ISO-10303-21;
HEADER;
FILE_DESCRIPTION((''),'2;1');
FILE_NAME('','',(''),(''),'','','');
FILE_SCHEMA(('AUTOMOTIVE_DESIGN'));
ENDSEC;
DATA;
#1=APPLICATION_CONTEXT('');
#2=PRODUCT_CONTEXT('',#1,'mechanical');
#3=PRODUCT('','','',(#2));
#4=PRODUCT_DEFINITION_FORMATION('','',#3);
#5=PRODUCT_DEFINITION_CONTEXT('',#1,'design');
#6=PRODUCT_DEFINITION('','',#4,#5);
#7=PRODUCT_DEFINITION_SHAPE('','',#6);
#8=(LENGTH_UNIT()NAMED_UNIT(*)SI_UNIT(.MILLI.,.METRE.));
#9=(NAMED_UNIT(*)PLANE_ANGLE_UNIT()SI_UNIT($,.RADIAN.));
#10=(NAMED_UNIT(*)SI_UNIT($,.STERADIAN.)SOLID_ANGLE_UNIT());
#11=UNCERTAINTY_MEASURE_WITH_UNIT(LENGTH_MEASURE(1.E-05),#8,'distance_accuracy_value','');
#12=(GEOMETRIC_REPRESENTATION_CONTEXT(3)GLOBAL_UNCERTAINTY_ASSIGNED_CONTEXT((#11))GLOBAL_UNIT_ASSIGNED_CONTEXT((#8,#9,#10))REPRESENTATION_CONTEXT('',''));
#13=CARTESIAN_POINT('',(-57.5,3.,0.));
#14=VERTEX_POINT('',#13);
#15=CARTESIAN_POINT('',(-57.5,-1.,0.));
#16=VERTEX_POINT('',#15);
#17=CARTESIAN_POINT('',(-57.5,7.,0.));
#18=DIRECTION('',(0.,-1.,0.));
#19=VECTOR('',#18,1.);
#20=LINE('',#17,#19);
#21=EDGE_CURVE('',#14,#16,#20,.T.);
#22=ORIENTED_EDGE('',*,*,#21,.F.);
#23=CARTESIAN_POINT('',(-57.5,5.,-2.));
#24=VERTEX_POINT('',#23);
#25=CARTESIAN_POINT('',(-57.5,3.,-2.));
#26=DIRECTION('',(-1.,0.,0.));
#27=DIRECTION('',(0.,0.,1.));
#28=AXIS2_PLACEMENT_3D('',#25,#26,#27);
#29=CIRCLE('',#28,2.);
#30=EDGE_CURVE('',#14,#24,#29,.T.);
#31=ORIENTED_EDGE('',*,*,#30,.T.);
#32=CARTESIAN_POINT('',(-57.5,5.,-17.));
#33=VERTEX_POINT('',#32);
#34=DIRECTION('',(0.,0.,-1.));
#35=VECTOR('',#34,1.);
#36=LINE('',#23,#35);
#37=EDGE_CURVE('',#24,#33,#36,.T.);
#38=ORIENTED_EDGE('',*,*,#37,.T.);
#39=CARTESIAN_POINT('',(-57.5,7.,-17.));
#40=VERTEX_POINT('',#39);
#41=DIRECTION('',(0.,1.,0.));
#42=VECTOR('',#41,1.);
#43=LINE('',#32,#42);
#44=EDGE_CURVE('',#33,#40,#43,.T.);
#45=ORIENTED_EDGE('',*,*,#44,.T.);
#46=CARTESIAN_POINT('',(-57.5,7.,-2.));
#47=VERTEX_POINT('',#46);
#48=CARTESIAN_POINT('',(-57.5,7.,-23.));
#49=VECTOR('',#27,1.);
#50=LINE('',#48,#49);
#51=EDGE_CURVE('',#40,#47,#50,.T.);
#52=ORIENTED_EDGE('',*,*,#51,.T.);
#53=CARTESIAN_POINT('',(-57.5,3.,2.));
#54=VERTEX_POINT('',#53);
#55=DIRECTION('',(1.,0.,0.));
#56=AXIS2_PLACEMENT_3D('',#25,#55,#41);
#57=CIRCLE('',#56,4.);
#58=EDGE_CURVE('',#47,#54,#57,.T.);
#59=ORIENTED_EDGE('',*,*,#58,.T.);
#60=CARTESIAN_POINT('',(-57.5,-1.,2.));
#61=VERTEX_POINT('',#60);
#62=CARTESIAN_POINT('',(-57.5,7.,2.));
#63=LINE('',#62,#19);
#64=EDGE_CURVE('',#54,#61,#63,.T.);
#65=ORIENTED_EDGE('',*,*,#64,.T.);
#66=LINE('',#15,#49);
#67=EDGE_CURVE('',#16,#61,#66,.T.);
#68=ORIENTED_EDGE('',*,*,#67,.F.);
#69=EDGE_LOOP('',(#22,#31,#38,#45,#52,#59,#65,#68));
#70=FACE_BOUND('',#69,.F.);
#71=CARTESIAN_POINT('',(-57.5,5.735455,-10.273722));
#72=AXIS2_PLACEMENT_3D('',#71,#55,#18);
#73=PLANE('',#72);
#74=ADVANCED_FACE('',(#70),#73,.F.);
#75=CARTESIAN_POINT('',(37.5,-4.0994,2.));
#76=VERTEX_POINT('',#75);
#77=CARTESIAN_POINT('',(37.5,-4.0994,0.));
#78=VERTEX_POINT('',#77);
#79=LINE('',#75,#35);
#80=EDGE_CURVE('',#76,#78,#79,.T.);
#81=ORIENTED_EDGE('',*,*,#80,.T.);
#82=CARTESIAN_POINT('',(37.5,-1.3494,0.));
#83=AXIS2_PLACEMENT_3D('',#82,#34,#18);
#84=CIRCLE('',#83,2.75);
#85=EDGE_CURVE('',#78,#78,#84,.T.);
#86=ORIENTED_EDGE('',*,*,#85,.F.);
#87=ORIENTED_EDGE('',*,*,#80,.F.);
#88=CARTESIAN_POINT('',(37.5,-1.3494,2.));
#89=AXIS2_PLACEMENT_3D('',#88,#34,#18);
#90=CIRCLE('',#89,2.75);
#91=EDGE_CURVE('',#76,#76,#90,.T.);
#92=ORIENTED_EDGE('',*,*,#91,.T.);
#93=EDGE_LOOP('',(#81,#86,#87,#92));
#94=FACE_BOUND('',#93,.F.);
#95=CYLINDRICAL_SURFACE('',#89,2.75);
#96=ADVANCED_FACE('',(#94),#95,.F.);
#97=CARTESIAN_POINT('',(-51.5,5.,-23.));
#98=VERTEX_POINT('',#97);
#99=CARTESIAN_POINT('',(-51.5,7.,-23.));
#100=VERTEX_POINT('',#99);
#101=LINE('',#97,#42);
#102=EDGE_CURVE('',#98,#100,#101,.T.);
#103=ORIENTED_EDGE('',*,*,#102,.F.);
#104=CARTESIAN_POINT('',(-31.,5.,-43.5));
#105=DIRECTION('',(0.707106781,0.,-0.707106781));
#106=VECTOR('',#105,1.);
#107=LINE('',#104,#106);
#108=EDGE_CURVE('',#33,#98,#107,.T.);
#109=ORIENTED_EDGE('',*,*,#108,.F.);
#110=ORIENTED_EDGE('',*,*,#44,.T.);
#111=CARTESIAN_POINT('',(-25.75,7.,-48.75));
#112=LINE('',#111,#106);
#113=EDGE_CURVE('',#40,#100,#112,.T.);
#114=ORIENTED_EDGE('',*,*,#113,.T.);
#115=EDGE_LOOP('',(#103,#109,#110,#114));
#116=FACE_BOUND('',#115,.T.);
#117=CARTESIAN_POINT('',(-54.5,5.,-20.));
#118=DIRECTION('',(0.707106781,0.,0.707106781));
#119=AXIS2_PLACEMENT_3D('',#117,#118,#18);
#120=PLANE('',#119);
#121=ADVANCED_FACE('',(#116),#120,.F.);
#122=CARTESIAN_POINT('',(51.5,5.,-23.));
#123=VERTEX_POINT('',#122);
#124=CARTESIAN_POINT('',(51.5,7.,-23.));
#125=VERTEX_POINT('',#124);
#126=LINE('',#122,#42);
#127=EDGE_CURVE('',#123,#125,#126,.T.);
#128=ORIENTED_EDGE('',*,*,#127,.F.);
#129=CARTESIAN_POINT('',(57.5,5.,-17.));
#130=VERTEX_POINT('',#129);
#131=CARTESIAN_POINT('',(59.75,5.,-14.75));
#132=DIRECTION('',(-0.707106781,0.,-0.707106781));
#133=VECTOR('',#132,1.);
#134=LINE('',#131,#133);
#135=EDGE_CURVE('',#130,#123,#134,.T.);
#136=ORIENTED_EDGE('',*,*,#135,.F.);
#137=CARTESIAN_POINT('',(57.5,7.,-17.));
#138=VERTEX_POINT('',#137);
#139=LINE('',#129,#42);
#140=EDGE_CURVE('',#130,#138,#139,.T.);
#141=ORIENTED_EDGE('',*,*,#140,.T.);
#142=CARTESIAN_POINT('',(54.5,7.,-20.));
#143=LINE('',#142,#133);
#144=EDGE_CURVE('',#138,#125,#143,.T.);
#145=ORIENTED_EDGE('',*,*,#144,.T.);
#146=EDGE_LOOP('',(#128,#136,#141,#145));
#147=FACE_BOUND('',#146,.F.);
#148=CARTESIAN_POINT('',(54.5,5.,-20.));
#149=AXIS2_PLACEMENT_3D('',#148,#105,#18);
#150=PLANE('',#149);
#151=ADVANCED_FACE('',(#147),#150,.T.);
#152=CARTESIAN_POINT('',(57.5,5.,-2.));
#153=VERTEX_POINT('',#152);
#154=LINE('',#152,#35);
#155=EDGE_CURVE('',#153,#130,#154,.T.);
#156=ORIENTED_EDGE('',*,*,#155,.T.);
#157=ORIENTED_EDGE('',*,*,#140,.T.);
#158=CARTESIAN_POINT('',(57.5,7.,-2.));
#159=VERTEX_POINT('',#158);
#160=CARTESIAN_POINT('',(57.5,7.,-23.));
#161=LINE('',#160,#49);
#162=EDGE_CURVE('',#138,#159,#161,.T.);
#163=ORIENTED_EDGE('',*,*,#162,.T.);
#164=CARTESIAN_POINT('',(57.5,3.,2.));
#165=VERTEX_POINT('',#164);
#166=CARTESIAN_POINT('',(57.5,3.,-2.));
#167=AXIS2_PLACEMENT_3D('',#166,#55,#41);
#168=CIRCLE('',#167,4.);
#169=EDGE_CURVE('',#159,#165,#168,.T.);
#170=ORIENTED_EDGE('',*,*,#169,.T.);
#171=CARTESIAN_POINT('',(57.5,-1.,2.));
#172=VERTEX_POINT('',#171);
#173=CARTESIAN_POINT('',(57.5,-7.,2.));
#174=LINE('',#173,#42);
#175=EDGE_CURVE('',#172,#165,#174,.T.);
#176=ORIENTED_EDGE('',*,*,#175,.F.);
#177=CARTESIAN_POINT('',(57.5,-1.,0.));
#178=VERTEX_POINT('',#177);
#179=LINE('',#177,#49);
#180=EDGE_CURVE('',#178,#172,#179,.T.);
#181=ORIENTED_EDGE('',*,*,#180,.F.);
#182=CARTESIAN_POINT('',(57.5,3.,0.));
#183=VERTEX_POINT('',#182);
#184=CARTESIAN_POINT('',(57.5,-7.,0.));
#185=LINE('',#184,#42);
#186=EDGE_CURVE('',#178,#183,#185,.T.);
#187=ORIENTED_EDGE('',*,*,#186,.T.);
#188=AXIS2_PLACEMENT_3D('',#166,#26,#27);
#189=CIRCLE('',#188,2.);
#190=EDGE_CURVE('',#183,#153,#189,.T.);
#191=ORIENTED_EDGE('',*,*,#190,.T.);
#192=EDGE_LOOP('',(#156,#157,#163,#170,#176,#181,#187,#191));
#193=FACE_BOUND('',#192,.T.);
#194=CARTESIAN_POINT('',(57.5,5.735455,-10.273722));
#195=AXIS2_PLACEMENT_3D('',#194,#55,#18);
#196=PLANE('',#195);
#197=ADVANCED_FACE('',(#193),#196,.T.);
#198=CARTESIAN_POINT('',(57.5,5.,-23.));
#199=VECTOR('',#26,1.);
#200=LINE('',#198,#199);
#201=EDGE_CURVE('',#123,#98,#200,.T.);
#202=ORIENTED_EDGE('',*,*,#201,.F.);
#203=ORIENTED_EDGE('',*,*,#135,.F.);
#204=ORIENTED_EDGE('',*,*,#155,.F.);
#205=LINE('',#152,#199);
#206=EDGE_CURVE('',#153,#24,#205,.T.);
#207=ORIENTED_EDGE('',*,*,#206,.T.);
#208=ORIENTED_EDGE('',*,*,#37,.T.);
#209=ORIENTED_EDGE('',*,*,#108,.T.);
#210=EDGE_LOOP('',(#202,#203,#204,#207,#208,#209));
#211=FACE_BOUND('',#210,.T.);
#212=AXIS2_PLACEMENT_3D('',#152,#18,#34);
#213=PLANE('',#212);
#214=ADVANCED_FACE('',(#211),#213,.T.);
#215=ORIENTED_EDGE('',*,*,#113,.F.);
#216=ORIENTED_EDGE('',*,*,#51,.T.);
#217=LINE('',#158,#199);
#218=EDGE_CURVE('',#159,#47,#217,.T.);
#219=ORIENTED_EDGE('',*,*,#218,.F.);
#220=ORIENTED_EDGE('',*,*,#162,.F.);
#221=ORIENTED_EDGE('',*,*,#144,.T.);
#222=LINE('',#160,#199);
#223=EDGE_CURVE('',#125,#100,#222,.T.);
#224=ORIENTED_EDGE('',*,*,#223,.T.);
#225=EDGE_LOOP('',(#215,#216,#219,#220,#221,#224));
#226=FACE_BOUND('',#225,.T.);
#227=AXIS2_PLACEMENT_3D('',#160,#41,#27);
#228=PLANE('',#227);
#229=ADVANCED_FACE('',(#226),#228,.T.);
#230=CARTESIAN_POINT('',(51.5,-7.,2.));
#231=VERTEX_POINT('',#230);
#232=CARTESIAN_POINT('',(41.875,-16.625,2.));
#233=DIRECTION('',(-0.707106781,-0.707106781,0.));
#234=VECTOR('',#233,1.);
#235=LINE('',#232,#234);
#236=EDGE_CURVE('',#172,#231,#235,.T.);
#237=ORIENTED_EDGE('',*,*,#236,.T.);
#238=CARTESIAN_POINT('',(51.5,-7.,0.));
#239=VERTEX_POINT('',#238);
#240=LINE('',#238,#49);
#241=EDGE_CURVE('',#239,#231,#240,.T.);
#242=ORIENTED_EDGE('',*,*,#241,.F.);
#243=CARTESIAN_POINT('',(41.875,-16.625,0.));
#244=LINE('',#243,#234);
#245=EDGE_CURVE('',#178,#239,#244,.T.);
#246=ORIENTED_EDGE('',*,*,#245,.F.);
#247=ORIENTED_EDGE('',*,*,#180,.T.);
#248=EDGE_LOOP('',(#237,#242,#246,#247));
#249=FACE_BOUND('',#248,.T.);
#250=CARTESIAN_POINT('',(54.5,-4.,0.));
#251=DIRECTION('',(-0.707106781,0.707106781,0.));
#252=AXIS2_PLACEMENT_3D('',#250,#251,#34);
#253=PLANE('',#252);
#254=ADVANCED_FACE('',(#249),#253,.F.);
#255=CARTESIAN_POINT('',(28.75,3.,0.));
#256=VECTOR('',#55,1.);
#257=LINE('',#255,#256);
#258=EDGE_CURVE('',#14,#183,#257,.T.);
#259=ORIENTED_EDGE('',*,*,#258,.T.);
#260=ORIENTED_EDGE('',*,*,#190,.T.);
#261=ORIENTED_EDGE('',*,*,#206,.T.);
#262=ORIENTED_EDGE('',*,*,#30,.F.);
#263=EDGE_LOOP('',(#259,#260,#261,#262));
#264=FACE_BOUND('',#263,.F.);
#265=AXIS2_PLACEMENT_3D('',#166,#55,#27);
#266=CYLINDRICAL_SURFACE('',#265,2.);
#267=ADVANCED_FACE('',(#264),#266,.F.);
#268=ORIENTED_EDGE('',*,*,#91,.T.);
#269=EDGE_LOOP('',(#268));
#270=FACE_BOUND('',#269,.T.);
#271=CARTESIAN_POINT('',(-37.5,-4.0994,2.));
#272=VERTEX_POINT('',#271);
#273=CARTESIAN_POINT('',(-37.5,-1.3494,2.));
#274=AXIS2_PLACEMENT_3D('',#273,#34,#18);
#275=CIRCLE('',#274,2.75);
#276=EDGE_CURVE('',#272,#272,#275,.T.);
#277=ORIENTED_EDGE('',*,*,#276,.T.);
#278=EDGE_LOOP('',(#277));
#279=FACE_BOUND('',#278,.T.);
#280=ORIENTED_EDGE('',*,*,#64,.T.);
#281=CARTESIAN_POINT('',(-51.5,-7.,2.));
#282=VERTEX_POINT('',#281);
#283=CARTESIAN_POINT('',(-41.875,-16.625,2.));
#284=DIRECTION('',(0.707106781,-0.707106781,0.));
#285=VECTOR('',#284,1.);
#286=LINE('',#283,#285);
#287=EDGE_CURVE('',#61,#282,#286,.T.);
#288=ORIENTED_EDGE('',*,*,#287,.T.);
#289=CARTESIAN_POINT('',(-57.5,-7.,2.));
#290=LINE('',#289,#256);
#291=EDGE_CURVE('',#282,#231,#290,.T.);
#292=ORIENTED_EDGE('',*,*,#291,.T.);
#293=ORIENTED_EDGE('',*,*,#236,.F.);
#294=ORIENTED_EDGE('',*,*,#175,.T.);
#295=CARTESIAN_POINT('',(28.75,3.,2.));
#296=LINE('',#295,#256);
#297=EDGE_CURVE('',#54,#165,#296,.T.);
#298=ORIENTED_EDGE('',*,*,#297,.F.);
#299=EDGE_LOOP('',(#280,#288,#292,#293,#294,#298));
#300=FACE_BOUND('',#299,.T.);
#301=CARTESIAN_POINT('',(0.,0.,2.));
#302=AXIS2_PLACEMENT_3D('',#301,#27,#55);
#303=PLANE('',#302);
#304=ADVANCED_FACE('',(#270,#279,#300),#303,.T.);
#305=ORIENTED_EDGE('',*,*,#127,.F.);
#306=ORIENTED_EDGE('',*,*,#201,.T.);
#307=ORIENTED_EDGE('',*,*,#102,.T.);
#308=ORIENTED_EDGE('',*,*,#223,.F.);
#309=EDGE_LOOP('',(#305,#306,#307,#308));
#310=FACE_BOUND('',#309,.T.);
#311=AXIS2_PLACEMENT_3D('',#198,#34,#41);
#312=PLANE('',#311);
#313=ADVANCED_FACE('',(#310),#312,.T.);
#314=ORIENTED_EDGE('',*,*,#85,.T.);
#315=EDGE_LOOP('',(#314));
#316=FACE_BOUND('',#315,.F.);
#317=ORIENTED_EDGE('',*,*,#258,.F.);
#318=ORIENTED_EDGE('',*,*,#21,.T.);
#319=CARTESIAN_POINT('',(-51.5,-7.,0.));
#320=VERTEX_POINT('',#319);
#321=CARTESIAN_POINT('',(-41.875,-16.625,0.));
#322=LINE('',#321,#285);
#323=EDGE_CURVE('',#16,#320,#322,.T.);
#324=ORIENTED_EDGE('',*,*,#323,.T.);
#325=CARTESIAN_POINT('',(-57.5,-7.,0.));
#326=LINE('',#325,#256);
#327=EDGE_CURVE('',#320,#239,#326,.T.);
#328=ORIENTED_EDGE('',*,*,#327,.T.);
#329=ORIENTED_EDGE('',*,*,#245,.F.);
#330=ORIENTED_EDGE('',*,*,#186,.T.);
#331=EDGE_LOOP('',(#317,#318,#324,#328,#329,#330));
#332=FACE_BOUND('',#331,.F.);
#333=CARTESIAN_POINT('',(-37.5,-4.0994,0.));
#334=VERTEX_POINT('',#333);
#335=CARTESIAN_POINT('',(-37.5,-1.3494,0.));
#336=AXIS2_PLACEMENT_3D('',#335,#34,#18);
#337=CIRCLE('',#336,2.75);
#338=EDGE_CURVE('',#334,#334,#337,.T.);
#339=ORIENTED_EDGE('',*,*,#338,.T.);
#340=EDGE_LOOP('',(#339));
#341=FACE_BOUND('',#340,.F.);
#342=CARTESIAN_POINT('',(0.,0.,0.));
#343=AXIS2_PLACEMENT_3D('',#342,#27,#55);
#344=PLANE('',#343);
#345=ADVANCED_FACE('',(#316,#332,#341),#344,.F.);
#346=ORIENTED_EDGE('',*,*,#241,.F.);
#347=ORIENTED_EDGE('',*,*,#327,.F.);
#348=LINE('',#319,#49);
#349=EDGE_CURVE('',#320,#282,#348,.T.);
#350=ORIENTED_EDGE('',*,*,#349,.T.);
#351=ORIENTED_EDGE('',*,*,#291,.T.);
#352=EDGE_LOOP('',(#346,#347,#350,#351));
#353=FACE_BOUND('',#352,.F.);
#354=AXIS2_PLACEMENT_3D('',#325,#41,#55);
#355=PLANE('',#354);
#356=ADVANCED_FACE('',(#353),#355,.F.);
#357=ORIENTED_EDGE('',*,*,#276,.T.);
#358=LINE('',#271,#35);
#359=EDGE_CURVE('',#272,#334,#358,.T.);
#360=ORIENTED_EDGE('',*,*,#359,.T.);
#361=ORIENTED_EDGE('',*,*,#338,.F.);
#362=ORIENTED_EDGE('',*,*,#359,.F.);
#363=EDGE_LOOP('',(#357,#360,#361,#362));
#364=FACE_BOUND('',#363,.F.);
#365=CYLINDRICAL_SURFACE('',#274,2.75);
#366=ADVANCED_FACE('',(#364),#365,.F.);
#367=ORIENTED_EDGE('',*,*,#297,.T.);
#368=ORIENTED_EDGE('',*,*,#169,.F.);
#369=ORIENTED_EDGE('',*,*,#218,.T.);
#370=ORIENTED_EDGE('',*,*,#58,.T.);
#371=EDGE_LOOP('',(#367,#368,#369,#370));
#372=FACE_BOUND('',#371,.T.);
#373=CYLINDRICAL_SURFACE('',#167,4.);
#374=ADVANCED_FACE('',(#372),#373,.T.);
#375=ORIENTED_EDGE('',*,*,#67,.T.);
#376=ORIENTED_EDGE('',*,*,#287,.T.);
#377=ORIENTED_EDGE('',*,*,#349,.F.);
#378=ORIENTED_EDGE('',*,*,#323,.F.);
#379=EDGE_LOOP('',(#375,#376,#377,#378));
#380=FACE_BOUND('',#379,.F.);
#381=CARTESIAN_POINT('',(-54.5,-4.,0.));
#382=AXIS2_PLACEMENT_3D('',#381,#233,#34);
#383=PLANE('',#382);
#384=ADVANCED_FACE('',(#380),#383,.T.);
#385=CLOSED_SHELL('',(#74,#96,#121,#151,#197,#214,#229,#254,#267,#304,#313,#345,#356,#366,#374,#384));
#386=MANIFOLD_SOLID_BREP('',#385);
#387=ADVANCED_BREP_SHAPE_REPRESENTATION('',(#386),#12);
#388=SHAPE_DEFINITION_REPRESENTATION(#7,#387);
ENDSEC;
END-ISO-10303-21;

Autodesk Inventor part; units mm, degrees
ref_plane "YZ Plane" through (0, 0, 0) normal (1, 0, 0) x (0, 1, 0)
ref_plane "XZ Plane" through (0, 0, 0) normal (0, 1, 0) x (-1, 0, 0)
ref_plane "XY Plane" through (0, 0, 0) normal (0, 0, 1) x (1, 0, 0)
sketch "Sketch1" plane through (0, 0, 0) normal (0, 0, 1) x (1, 0, 0)
  line L0 (-57.5, -7) -> (57.5, -7)
  line L1 (57.5, -7) -> (57.5, 7)
  line L2 (57.5, 7) -> (-57.5, 7)
  line L3 (-57.5, 7) -> (-57.5, -7)
  line L4 (-57.5, -7) -> (57.5, 7) construction
  line L5 (57.5, -7) -> (-57.5, 7) construction
  point P0 (0, 0)
  dimension "d0" = 115
  dimension "d1" = 14
extrude "Plate1" add sketch "Sketch1" along normal blind 2
sketch "Sketch2" plane through (57.5, 5, 2) normal (0, 1, 0) x (-1, 0, 0)
  line L0 (115, 0) -> (0, 0)
  line L1 (0, 0) -> (0, -25)
  line L2 (0, -25) -> (115, -25)
  line L3 (115, -25) -> (115, 0)
edge flange "Flange1" height 25 angle 90 thickness 2 bend radius 2 thickness toward (0, 1, 0) relief tear relief width 2 relief depth 1 edges at (0, 7, 0) wall of the first edge with corners at (-57.5, 5, 2) (57.5, 5, 2) (57.5, 5, -23) (-57.5, 5, -23)
bend "Bend1"
corner "Corner1"
chamfer "Corner Chamfer1" distance 6 angle 45 4 edges at (-57.5, -7, 1) (57.5, -7, 1) (-57.5, 6, -23) (57.5, 6, -23)
sketch "Sketch3" plane through (0, 0, 2) normal (0, 0, 1) x (1, 0, 0)
  circle A0 centre (-37.5, -132.5) radius 2.9585 projected
  circle A1 centre (37.5, -132.5) radius 2.9585 projected
  circle A2 centre (-5, -1.3494) radius 3.1 projected
  point P0 (0, 0)
  point P1 (-37.5, -1.3494)
  point P2 (37.5, -1.3494)
hole "Hole1" at (-37.5, -1.3494, 2) at (37.5, -1.3494, 2) direction (0, 0, -1) diameter 5.5 depth 2 tip angle 118
sketch "Sketch4" plane through (0, 0, 0) normal (0, 0, -1) x (-1, 0, 0)
  point P0 (0, 0)
equation "\"d21\" = Thickness"
equation "\"d3\" = BendReliefWidth"
equation "\"d4\" = BendReliefDepth"
equation "\"d5\" = MinimumRemnant"
equation "\"d6\" = BendRadius"
equation "\"d9\" = BendRadius"
equation "\"d10\" = CornerReliefSize"
equation "\"d11\" = GapSize"
equation "\"d12\" = JacobiRadiusSize"
equation "\"BendRadius\" = Thickness"
equation "\"BendReliefWidth\" = Thickness"
equation "\"BendReliefDepth\" = 0.5 * Thickness"
equation "\"CornerReliefSize\" = 4 * Thickness"
equation "\"MinimumRemnant\" = 2 * Thickness"
equation "\"TransitionRadius\" = BendRadius"
equation "\"JacobiRadiusSize\" = BendRadius"
equation "\"GapSize\" = Thickness"
equation "\"d2\" = BendRadius"
equation "\"Thickness\" = 2"
